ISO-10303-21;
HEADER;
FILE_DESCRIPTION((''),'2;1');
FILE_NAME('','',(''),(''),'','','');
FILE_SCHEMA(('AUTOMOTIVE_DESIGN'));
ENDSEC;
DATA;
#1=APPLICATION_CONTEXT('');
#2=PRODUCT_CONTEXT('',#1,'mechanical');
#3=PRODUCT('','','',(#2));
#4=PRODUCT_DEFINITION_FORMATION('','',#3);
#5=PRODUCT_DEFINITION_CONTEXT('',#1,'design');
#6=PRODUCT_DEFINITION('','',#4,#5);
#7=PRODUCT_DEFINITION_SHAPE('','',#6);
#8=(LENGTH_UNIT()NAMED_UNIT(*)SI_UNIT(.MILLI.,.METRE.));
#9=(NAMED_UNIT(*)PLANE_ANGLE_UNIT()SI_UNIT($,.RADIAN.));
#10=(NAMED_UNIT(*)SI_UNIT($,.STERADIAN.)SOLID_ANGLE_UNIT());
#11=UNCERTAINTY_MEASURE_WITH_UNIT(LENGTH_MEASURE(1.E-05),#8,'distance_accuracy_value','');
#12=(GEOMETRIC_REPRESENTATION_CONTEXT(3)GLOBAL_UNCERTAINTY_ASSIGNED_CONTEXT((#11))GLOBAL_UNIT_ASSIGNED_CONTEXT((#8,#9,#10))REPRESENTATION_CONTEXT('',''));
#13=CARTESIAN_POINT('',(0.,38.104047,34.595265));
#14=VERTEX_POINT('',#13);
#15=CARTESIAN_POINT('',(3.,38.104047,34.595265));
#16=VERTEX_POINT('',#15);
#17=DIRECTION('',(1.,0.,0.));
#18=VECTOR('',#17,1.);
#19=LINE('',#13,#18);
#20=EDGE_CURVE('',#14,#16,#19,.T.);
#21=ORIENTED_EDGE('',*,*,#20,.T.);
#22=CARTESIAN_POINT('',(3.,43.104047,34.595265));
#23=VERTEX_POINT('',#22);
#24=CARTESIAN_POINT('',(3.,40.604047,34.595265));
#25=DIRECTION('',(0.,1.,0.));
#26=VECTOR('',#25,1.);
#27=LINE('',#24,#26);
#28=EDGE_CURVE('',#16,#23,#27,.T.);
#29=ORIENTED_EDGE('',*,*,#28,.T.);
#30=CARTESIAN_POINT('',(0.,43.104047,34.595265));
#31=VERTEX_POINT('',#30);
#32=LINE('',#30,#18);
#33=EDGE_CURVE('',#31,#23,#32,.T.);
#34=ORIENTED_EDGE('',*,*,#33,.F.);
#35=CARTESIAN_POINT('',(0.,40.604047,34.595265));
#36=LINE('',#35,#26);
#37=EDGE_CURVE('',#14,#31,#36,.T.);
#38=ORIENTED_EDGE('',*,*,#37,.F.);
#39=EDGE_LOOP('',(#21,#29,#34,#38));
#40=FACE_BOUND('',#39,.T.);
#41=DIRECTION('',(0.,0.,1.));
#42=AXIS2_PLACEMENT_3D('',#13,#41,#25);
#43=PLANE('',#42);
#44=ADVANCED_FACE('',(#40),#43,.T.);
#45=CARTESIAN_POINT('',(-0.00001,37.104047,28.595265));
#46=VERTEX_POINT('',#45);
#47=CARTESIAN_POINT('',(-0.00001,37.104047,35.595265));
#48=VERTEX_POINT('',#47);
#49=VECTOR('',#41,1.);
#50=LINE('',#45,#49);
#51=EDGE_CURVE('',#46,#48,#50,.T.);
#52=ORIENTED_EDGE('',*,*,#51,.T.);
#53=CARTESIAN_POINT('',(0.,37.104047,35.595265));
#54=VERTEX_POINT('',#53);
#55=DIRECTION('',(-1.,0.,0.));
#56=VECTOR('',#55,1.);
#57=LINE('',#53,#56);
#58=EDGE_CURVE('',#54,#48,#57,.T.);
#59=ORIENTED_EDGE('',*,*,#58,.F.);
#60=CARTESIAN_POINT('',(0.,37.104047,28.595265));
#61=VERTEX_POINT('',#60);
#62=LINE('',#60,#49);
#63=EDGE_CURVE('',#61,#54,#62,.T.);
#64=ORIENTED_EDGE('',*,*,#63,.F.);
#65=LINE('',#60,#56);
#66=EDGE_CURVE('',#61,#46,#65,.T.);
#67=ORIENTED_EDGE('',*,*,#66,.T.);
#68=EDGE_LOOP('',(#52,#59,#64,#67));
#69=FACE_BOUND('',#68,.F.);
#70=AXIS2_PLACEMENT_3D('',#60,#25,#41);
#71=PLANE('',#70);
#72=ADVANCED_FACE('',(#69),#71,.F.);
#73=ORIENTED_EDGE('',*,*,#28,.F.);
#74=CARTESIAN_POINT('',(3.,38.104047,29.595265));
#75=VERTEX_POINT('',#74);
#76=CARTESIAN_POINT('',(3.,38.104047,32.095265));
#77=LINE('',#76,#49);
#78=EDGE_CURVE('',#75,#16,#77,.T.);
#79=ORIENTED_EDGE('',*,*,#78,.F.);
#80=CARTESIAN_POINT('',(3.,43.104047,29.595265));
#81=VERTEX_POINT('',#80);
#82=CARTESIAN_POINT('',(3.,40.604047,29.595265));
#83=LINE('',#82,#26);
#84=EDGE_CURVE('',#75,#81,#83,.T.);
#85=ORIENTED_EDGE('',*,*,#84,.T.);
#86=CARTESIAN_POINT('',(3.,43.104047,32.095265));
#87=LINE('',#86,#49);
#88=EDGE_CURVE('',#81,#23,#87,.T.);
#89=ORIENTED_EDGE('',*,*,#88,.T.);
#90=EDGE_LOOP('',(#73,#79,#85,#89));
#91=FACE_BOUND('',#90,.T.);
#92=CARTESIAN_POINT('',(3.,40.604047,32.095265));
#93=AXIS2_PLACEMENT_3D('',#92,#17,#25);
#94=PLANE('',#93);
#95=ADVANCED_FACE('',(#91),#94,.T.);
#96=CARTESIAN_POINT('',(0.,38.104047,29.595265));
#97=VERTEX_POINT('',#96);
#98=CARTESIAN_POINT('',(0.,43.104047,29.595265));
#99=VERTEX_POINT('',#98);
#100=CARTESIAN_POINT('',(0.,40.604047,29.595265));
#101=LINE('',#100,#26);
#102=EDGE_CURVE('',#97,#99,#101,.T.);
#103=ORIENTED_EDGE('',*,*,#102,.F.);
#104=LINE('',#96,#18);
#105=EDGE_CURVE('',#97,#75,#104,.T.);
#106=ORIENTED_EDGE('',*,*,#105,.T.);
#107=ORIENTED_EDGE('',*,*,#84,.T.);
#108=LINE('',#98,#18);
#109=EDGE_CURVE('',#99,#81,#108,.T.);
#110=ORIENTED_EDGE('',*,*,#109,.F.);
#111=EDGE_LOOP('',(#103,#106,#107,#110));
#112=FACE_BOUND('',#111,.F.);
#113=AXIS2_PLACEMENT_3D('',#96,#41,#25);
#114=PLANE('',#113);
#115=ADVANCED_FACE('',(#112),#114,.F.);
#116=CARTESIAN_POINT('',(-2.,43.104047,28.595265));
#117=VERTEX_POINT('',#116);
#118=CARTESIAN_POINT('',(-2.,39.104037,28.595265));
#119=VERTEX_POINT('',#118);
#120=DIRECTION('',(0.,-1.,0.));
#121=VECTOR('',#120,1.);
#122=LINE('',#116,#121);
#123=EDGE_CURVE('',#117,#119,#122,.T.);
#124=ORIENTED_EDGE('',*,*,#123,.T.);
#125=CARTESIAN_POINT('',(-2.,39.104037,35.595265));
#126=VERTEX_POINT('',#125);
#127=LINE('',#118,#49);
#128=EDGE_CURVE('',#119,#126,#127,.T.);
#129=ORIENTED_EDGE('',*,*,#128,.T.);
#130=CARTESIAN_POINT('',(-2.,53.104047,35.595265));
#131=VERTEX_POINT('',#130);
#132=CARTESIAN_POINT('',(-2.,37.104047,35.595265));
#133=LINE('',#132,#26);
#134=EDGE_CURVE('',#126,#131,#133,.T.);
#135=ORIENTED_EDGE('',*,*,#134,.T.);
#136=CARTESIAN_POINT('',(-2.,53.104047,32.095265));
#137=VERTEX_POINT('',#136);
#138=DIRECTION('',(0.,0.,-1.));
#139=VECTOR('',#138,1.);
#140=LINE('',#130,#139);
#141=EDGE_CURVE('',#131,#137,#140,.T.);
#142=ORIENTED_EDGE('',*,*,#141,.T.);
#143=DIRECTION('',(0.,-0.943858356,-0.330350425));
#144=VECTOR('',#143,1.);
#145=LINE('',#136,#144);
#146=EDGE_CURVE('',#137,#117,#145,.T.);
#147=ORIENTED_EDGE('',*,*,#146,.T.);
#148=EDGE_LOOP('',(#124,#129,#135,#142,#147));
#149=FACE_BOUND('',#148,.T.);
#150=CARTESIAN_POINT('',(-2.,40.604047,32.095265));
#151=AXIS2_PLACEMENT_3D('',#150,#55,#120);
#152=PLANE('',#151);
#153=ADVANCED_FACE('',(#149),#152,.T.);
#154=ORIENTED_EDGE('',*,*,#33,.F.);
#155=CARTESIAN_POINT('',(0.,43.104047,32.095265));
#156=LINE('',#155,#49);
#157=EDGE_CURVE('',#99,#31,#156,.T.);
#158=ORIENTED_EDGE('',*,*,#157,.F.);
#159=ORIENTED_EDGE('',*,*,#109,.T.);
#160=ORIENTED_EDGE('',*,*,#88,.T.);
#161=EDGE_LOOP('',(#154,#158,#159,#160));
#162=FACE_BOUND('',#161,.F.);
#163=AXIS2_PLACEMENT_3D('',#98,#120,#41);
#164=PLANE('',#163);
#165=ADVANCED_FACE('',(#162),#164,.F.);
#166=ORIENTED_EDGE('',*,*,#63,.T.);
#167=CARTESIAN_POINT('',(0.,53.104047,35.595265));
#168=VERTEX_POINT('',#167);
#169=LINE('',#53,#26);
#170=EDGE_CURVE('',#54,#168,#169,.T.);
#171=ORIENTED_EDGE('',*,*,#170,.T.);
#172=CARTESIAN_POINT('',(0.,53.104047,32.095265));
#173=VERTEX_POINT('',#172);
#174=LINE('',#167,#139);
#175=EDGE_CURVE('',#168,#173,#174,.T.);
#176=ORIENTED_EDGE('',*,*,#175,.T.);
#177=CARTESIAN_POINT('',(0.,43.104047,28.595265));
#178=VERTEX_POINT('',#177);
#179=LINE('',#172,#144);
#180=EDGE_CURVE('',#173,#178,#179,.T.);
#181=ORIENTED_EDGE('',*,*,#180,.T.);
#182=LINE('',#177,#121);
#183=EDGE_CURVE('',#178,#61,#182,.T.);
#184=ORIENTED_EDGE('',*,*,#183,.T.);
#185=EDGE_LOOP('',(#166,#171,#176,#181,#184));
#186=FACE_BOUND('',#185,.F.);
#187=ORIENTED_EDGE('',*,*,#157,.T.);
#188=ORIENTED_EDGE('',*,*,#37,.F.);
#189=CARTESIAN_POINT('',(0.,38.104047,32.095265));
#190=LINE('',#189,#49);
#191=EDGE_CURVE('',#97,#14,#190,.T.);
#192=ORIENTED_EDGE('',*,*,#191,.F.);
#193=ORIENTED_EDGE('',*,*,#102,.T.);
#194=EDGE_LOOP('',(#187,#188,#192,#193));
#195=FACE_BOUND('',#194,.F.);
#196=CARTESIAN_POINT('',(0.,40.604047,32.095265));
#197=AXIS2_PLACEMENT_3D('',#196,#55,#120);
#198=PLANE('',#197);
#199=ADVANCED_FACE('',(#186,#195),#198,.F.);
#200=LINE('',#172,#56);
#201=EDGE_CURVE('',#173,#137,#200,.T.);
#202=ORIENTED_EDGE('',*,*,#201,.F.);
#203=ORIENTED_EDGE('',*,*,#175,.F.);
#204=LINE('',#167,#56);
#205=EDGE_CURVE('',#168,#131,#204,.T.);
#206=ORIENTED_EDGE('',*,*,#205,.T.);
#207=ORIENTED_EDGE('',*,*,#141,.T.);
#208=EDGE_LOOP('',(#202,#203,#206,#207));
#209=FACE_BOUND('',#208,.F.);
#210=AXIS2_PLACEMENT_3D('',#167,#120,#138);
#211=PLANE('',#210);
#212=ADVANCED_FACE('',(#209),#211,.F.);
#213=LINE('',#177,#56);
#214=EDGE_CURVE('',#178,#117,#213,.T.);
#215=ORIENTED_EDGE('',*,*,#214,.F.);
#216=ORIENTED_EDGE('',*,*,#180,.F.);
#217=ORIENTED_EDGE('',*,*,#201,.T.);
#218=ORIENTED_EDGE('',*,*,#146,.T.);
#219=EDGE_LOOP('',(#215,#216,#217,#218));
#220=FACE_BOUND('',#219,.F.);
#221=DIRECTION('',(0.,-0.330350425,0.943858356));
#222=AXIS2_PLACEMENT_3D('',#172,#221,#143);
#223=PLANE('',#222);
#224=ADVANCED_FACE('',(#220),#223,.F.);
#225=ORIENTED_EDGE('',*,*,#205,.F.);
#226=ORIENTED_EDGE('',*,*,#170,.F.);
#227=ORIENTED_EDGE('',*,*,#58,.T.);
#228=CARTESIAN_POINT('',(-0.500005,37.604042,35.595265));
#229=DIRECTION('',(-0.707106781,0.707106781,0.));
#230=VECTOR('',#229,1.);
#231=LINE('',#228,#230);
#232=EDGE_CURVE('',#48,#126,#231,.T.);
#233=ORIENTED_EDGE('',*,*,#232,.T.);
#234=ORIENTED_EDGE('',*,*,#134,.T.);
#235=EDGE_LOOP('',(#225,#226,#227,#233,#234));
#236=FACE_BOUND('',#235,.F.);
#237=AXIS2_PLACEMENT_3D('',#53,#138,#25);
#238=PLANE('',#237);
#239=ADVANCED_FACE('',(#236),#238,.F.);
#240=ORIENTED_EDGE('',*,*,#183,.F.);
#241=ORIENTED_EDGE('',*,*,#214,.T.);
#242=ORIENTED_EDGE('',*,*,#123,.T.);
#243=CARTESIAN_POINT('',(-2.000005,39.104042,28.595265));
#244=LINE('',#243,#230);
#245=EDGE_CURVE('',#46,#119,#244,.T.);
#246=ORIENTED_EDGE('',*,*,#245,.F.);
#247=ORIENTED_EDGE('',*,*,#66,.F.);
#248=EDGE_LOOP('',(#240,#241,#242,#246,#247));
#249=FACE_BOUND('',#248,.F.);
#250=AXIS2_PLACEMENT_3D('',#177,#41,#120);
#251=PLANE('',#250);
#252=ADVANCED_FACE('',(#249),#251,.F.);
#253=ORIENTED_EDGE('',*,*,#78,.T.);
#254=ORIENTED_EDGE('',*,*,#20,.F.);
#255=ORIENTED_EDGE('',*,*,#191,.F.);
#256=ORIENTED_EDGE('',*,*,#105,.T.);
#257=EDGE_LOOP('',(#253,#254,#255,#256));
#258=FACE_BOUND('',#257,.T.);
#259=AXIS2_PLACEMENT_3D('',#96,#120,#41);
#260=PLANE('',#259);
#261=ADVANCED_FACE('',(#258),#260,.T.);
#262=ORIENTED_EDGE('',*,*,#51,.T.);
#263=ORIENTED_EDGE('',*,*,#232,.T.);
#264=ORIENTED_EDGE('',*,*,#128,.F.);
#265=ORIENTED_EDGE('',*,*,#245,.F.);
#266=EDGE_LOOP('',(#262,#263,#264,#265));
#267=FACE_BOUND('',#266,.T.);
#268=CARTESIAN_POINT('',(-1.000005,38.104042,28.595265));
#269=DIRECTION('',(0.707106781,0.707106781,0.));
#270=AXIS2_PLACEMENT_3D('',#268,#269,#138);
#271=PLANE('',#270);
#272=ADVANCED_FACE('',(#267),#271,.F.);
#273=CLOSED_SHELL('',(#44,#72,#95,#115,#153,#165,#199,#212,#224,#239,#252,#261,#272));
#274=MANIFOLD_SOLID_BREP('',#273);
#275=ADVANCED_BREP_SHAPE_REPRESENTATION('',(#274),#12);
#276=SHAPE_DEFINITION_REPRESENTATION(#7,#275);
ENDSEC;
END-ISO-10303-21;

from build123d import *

# Parameters (mm, degrees)
F0_W     = 5
F0_H     = 5
F1_DEPTH = 3
F2_W     = 5
F2_H     = 5
F3_DEPTH = 2
F4_SIZE  = 1.99999


# Not quite as in the source:
# - a fillet or chamfer is up to 0.001 mm smaller than in the source, because OpenCascade refuses the exact size


with BuildPart() as f1:
    # F0 (on Right) → F1 (new body)
    with BuildSketch(Plane.YZ):
        with Locations((40.6040474772, 32.0952650385)):
            Rectangle(F0_W, F0_H)
    extrude(amount=F1_DEPTH)

    # F2 (on face) → F3 (join)
    with BuildSketch(Plane(origin=(0, 0, 0), x_dir=(0, -1, 0), z_dir=(-1, 0, 0))):
        with Locations((-40.6040474772, 32.0952650385)):
            Rectangle(F2_W, F2_H)
        Polygon((-37.1040474772, 28.5952650385), (-37.1040474772, 35.5952650385), (-43.1040474772, 35.5952650385), (-43.1040474772, 34.5952650385), (-38.1040474772, 34.5952650385), (-38.1040474772, 29.5952650385), (-43.1040474772, 29.5952650385), (-43.1040474772, 28.5952650385), align=None)
        Polygon((-43.1040474772, 34.5952650385), (-43.1040474772, 35.5952650385), (-51.1040474772, 32.7952650385), (-51.1040474772, 31.3952650385), (-43.1040474772, 28.5952650385), (-43.1040474772, 29.5952650385), align=None)
        Polygon((-51.1040474772, 32.7952650385), (-43.1040474772, 35.5952650385), (-51.1040474772, 35.5952650385), align=None)
        Polygon((-51.1040474772, 32.7952650385), (-51.1040474772, 35.5952650385), (-53.1040474772, 35.5952650385), (-53.1040474772, 32.0952650385), align=None)
        Polygon((-51.1040474772, 31.3952650385), (-51.1040474772, 32.7952650385), (-53.1040474772, 32.0952650385), align=None)
    extrude(amount=F3_DEPTH)

    # F4 (size 2 in the source; OpenCascade refuses exactly that, so slightly less here)
    f4_edges = [f1.edges().sort_by_distance(p)[0] for p in [
        (-2, 37.104047, 32.095265),
    ]]
    chamfer(f4_edges, length=F4_SIZE)


solid = f1.part
